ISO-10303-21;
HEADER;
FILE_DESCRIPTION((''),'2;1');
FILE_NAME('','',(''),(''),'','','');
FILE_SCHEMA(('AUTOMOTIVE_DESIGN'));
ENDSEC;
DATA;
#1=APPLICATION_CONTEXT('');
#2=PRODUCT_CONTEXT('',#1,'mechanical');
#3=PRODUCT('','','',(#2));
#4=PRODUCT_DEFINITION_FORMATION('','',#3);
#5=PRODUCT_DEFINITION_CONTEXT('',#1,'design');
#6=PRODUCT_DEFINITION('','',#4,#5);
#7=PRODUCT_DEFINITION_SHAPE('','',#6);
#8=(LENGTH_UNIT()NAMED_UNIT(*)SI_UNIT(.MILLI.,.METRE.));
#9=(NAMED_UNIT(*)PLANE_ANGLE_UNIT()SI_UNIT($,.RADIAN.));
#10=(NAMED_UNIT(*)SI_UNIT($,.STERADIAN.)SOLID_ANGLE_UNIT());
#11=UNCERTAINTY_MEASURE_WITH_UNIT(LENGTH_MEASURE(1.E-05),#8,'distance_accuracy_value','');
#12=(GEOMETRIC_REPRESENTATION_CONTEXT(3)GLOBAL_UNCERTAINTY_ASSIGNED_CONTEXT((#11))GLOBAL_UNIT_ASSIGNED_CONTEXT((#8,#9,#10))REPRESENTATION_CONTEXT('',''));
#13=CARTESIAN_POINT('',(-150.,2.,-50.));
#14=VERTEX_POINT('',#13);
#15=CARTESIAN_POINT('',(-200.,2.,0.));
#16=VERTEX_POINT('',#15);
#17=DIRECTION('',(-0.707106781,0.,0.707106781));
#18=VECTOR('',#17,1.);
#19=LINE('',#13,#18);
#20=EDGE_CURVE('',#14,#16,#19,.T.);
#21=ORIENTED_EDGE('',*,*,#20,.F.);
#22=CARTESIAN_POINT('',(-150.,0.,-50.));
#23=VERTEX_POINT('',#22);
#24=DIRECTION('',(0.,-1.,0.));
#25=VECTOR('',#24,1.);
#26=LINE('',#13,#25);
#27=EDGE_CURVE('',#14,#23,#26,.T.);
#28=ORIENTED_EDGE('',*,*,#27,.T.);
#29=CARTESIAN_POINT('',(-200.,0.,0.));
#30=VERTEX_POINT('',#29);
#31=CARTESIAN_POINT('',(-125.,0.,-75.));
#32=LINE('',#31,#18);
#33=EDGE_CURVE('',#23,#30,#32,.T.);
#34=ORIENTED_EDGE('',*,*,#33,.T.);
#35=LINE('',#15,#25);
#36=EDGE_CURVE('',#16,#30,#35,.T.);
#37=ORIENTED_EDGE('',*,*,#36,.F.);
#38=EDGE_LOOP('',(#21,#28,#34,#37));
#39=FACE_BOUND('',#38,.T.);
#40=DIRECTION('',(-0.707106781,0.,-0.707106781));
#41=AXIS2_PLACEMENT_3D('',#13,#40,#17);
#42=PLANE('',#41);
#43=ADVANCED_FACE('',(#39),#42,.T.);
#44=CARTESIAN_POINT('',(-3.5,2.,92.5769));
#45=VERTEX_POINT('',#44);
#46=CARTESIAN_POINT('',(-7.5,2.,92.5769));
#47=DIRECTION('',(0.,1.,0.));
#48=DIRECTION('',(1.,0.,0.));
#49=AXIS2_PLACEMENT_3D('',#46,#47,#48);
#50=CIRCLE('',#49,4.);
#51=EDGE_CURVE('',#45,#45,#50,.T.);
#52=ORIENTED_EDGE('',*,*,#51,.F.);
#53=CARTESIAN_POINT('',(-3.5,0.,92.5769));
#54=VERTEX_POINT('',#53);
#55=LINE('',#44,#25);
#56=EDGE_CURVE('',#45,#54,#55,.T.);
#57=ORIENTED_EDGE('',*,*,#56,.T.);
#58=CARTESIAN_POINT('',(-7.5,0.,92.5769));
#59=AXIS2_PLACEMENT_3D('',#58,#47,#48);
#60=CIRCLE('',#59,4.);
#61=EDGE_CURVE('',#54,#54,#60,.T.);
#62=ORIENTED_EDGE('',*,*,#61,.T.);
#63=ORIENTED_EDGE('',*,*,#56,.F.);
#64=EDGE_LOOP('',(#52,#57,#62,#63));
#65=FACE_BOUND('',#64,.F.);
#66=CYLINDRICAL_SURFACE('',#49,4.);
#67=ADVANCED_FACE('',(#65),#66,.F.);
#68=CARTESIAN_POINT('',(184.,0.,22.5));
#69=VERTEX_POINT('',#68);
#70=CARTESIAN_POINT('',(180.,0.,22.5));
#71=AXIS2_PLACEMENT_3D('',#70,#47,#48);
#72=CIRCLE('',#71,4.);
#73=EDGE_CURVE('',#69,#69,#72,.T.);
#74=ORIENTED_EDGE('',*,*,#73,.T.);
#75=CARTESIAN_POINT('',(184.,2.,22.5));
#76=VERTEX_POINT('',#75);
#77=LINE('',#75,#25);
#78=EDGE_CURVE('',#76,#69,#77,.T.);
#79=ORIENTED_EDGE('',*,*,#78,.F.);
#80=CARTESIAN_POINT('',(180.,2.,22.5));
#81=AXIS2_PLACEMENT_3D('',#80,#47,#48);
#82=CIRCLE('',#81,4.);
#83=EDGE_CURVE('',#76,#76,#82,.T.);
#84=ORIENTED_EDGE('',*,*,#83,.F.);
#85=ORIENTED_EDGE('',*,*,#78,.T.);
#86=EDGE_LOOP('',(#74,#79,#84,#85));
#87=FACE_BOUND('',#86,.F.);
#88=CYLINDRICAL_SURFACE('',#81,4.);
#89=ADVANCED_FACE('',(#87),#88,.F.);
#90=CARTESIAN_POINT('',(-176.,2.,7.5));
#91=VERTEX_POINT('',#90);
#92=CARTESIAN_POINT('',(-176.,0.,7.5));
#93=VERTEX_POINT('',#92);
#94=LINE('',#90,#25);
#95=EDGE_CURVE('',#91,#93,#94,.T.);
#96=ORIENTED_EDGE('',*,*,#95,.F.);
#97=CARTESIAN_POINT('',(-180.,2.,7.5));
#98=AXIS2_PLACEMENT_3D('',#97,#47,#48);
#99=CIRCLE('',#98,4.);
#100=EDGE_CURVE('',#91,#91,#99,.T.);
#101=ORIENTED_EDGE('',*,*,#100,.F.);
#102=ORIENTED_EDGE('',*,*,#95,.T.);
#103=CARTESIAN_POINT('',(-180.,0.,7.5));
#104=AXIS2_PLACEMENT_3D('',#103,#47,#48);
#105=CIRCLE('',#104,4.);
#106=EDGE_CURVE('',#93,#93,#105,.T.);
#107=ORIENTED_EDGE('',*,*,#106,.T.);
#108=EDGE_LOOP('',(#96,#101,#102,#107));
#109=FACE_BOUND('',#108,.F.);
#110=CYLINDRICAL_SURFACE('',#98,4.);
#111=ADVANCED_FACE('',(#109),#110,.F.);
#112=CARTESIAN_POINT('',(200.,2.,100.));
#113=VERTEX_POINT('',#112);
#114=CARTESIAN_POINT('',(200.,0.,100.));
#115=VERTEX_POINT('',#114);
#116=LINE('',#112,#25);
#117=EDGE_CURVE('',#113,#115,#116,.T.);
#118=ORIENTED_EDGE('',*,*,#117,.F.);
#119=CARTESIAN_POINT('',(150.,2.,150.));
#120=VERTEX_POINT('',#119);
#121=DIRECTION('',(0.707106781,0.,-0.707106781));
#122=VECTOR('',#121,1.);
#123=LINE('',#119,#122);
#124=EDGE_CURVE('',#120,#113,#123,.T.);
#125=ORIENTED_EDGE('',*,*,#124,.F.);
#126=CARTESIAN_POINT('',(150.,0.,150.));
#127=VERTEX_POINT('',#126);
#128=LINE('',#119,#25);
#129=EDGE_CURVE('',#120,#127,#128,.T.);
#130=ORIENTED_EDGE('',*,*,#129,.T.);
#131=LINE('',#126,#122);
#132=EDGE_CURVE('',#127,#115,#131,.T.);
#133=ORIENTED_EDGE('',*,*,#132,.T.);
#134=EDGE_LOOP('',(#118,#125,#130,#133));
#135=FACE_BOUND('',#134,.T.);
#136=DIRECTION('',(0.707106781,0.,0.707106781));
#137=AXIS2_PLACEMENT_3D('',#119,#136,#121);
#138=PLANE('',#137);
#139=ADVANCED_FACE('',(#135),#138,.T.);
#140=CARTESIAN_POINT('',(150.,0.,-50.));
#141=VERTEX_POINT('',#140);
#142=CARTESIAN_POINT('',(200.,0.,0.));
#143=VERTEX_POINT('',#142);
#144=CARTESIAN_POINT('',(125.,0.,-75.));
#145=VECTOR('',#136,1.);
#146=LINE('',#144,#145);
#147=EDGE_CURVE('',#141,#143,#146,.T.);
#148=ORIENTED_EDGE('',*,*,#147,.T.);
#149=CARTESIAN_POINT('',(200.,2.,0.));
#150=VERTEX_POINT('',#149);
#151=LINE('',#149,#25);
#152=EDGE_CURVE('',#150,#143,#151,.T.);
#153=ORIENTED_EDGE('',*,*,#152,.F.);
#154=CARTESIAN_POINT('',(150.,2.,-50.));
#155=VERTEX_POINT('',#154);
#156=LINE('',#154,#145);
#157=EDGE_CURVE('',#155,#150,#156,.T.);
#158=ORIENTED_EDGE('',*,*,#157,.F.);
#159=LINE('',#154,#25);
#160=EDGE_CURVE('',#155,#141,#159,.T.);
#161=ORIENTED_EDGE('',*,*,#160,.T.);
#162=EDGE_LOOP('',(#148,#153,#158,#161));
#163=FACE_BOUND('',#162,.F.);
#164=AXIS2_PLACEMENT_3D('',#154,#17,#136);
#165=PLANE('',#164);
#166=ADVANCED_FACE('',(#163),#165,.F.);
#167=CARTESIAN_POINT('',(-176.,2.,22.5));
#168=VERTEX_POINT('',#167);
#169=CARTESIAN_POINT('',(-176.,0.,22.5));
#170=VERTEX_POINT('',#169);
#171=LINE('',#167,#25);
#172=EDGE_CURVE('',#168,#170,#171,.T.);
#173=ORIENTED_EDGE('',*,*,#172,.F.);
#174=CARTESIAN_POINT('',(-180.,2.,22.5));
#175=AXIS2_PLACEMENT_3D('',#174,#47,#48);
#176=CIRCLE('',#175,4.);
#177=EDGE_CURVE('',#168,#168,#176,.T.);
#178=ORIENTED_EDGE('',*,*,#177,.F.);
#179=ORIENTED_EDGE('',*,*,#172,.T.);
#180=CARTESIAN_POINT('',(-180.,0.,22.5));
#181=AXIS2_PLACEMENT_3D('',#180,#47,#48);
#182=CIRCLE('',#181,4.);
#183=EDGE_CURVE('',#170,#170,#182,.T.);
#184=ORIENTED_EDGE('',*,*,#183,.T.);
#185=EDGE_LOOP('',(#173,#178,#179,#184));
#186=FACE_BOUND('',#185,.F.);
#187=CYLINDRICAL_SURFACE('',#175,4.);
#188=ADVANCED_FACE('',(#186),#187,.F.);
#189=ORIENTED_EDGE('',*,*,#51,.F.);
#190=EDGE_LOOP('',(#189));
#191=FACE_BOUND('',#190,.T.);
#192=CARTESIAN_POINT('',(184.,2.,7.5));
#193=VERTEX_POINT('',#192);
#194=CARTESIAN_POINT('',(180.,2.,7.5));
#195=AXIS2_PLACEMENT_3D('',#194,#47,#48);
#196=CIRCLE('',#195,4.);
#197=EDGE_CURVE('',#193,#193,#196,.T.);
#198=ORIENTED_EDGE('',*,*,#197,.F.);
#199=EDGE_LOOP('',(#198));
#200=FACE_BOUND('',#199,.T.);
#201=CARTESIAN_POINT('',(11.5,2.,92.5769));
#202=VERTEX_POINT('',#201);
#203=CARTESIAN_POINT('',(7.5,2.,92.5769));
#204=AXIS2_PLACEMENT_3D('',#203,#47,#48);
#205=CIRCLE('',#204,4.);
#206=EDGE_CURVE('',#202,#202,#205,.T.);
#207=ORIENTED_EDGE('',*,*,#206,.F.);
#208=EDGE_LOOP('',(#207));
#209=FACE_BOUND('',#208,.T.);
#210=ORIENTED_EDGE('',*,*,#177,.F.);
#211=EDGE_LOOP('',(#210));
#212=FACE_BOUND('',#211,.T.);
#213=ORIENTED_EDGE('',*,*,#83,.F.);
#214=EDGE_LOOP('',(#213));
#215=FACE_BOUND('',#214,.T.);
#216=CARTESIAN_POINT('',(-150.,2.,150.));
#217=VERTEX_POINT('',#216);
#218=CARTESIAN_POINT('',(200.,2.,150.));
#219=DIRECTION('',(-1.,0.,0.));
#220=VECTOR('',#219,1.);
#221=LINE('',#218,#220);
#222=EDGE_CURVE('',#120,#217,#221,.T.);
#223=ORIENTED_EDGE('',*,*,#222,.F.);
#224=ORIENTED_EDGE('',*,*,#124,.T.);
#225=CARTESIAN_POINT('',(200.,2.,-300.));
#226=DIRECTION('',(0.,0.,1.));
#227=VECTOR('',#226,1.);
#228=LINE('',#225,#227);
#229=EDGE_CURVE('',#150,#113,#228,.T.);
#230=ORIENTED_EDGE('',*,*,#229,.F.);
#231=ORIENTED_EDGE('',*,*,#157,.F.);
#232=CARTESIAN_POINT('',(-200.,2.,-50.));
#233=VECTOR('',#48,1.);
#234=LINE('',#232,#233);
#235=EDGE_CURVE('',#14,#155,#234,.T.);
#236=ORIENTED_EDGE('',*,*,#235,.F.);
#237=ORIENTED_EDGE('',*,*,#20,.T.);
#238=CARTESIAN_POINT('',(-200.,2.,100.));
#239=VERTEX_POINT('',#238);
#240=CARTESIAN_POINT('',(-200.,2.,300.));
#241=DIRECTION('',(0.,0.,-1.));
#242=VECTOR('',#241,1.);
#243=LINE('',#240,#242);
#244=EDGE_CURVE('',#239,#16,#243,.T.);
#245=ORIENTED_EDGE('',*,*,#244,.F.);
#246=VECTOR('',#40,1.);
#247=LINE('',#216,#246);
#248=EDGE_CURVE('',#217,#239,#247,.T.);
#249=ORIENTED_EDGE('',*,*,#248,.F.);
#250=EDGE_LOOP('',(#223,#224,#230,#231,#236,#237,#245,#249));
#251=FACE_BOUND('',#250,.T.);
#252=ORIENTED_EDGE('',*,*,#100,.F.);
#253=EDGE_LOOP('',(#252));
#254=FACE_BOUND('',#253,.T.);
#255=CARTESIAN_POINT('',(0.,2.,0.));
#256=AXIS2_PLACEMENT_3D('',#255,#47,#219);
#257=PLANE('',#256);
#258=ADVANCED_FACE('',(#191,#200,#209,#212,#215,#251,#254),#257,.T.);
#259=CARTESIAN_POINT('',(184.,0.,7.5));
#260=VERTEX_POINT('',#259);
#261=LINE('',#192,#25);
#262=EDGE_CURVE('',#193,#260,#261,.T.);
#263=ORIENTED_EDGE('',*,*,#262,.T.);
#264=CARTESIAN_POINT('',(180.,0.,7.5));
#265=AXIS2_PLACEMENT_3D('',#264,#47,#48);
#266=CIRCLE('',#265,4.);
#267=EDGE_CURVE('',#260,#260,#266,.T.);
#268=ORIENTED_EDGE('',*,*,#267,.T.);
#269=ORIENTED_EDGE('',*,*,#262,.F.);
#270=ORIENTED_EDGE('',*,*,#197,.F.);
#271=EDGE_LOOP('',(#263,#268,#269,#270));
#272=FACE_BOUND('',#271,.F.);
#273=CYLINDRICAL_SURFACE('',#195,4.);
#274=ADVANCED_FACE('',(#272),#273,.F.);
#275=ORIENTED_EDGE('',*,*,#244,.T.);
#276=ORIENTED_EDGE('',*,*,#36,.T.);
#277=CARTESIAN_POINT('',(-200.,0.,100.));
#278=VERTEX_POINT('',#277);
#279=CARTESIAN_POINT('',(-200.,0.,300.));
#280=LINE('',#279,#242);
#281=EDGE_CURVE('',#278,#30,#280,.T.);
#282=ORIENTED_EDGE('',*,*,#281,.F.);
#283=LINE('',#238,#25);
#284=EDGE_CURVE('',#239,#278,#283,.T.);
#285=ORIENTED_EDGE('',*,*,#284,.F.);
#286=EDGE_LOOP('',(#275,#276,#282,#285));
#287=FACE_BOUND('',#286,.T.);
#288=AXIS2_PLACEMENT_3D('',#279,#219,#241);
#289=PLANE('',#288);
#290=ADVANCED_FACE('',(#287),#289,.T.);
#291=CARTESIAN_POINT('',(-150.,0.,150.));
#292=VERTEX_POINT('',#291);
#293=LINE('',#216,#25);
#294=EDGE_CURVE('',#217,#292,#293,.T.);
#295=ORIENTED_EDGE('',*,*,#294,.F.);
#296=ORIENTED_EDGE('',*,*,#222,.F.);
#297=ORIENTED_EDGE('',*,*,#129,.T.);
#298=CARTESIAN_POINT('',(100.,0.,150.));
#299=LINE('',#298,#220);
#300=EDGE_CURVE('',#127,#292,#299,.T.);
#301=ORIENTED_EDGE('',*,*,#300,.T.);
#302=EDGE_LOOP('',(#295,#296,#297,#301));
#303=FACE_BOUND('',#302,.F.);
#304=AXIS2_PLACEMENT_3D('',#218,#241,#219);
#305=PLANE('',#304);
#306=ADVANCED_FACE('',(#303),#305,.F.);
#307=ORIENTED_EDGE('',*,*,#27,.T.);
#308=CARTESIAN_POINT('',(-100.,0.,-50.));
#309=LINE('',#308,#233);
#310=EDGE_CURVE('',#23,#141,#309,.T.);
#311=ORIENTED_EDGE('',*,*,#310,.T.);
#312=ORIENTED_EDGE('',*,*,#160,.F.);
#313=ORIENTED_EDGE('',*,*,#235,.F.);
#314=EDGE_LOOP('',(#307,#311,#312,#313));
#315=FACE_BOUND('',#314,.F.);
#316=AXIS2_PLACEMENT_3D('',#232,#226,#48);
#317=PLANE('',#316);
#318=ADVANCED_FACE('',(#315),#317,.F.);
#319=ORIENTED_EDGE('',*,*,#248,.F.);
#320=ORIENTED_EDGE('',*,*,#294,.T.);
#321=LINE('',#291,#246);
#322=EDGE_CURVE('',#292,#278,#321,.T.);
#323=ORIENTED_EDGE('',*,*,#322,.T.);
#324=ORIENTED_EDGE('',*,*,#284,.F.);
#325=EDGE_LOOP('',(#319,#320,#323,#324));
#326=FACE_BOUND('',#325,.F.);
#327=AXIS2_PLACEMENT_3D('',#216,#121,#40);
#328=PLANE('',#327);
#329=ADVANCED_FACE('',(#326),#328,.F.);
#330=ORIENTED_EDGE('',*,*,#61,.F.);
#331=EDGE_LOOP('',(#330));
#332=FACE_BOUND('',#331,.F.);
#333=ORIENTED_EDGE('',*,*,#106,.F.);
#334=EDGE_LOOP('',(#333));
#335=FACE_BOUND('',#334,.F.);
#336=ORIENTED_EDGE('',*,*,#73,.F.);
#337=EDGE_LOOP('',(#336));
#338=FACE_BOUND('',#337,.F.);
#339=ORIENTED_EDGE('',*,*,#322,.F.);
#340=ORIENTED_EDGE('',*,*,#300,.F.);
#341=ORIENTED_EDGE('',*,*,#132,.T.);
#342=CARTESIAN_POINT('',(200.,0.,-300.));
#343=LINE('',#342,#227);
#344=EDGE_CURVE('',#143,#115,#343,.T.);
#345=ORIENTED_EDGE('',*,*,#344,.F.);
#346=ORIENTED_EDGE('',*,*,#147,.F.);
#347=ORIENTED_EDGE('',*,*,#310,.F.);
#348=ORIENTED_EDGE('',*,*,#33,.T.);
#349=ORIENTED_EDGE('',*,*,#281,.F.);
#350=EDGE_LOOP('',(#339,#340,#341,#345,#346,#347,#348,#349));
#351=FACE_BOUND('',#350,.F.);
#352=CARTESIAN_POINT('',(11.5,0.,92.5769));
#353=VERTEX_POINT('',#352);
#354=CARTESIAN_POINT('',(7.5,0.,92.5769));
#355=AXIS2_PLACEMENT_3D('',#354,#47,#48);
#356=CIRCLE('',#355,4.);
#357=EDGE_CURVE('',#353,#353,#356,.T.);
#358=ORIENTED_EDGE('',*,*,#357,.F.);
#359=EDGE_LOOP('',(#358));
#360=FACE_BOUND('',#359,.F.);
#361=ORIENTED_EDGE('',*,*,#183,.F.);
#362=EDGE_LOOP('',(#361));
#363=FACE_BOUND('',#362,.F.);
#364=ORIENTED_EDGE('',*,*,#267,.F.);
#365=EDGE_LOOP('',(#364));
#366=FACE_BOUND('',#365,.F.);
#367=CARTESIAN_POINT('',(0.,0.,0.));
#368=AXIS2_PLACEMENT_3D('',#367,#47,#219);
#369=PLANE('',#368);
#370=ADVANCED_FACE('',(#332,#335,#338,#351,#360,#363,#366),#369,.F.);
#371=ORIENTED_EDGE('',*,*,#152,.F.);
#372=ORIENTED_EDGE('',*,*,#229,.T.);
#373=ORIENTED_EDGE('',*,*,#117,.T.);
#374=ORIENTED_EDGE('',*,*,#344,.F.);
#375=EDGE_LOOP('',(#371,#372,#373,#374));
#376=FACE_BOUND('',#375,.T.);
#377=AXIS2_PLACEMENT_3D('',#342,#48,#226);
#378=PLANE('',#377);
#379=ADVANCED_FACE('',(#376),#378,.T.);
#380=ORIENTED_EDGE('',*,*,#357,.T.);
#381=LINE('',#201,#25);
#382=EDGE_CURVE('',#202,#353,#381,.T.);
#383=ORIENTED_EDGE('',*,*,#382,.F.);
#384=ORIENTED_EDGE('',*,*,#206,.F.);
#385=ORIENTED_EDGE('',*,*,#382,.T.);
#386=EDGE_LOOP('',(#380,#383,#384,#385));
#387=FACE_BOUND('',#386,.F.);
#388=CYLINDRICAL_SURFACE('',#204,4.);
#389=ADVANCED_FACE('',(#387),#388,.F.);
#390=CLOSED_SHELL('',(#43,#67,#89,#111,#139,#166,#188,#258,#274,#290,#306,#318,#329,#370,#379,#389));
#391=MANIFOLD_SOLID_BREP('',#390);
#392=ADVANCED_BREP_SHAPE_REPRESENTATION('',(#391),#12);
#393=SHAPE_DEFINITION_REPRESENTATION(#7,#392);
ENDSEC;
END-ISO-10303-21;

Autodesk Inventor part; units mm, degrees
ref_plane "YZ Plane" through (0, 0, 0) normal (1, 0, 0) x (0, 1, 0)
ref_plane "XZ Plane" through (0, 0, 0) normal (0, 1, 0) x (-1, 0, 0)
sketch "Sketch1" plane through (0, 0, 0) normal (0, 1, 0) x (-1, 0, 0)
  line L0 (-200, 300) -> (200, 300)
  line L1 (200, 300) -> (200, -300)
  line L2 (200, -300) -> (-200, -300)
  line L3 (-200, -300) -> (-200, 300)
  line L4 (-200, 300) -> (200, -300) construction
  line L5 (200, 300) -> (-200, -300) construction
  point P0 (0, 0)
  dimension "d0" = 400
  dimension "d1" = 600
extrude "Extrusion1" add sketch "Sketch1" along normal blind 2
sketch "Sketch2" plane through (0, 2, 0) normal (0, 1, 0) x (1, 0, 0)
  line L0 (200, 300) -> (-200, 300) projected
  line L1 (-200, 300) -> (-200, 275)
  line L2 (-200, 300) -> (-200, -300) projected
  line L3 (-200, 300) -> (-100, 300)
  line L4 (-100, 300) -> (-200, 275)
  line L5 (-200, 275) -> (-200, 250)
  line L6 (-200, 250) -> (-175, 250)
  line L7 (-175, 250) -> (-175, 150)
  line L8 (-175, 150) -> (-200, 150)
  line L9 (-200, 250) -> (-200, 150)
  line L10 (0, 250) -> (0, 74.4907)
  line L11 (-155.9773, 0) -> (157.8952, 0)
  line L12 (-200, 300) -> (200, 300)
  line L13 (200, 300) -> (200, -300)
  line L14 (100, 300) -> (200, 275)
  line L15 (200, 250) -> (175, 250)
  line L16 (175, 250) -> (175, 150)
  line L17 (175, 150) -> (200, 150)
  line L18 (200, -300) -> (-200, -300)
  line L19 (-200, -300) -> (-200, -275)
  line L20 (-200, -300) -> (-100, -300)
  line L21 (-100, -300) -> (-200, -275)
  line L22 (-200, -275) -> (-200, -250)
  line L23 (-200, -250) -> (-200, -150)
  line L24 (200, -300) -> (200, 300)
  line L25 (100, -300) -> (200, -275)
  line L26 (-200, -300) -> (200, -300)
  point P0 (0, 0)
  dimension "d4" = 25
  dimension "d5" = 100
  dimension "d6" = 25
  dimension "d7" = 25
  dimension "d8" = 100
extrude "Extrusion2" cut sketch "Sketch2" against normal blind 2 contours L13 L14 L0 | L4 L1 L0 | L13 L17 L16 L15 | L6 L7 L8 L2 | L13 L18 L25 | L18 L2 L21
mirror "Mirror2" about plane through (0, 0, 0) normal (1, 0, 0)
ref_plane "Work Plane2" through (-100, 0, 190) normal (0, 0, 1) x (1, 0, 0)
mirror "Mirror4" about plane through (-100, 0, 190) normal (0, 0, 1) of "Mirror2"
sketch "Sketch13" plane through (0, 2, 0) normal (0, 1, 0) x (1, 0, 0)
  line L0 (-200, 150) -> (-200, -275) projected
  line L1 (-200, 0) -> (-200, 150)
  line L2 (-200, 150) -> (200, 150)
  line L3 (200, 150) -> (200, -150)
  line L4 (200, -150) -> (-200, -150)
  line L5 (-200, 0) -> (-200, 50)
  line L6 (-200, 50) -> (200, 50)
  line L7 (-200, 50) -> (-200, 595.1707)
  line L8 (-200, 595.1707) -> (291.7949, 595.1707)
  line L9 (291.7949, 595.1707) -> (291.7949, 150)
  line L10 (291.7949, 150) -> (200, 150)
  line L11 (-200, -150) -> (-200, -431.5542)
  line L12 (-200, -431.5542) -> (200, -431.5542)
  line L13 (200, -431.5542) -> (200, -150)
  point P0 (0, 0)
  dimension "d71" = 400
  dimension "d72" = 300
  dimension "d73" = 50
extrude "Extrusion11" cut sketch "Sketch13" against normal blind 10 contours L2 L3 L6 L0 | L7 L8 L9 L10 L2 | L4 L13 L12 L11 L0
sketch "Sketch14" plane through (0, 2, 0) normal (0, 1, 0) x (1, 0, 0)
  line L0 (-250, 100) -> (-150, 100)
  line L1 (-150, 100) -> (-150, 0)
  line L2 (-150, 0) -> (-250, 0)
  line L3 (-250, 0) -> (-250, 100)
  line L4 (-200, 50) -> (-200, -150) projected
  line L5 (-250, 100) -> (-150, 0) construction
  line L6 (-150, 100) -> (-250, 0) construction
  line L7 (200, 50) -> (-200, 50) projected
  line L8 (-150, 50) -> (-200, 0)
  line L9 (-200, 50) -> (-200, -50)
  line L10 (-200, -50) -> (200, -50)
  line L11 (0, 0) -> (0, -87.9853)
  line L12 (-250, -200) -> (-150, -200)
  line L13 (-150, -200) -> (-150, -100)
  line L14 (-150, -100) -> (-250, -100)
  line L15 (-250, -100) -> (-250, -200)
  line L16 (-150, -150) -> (-200, -100)
  line L17 (250, 100) -> (150, 100)
  line L18 (150, 100) -> (150, 0)
  line L19 (150, 0) -> (250, 0)
  line L20 (250, 0) -> (250, 100)
  line L21 (150, 50) -> (200, 0)
  line L22 (250, -200) -> (150, -200)
  line L23 (250, -100) -> (250, -200)
  line L24 (150, -100) -> (250, -100)
  line L25 (150, -150) -> (200, -100)
  line L26 (150, -200) -> (150, -100)
  dimension "d76" = 100
  dimension "d77" = 100
  dimension "d78" = 100
extrude "Extrusion12" cut sketch "Sketch14" against normal blind 10 contours L0 L1 L7 L4 L2 L3 | L8 L4 L7 | L15 L14 L16 L13 L12 | L20 L19 L21 L18 L17 | L22 L26 L25 L24 L23
sketch "Sketch15" plane through (0, 2, 0) normal (0, 1, 0) x (1, 0, 0)
  line L0 (-200, 0) -> (-200, -100) projected
  line L1 (-200, 0) -> (-200, -30)
  line L2 (-200, -30) -> (-170, -30)
  line L3 (-170, -30) -> (-170, 0)
  line L4 (-180, -15) -> (-180, -16)
  line L5 (-180, -16) -> (-180, -15)
  line L6 (-180, -15) -> (-180, -14)
  circle A0 centre (-180, -7.5) radius 4
  circle A1 centre (-180, -22.5) radius 4
  line L7 (0, 0) -> (0, -46.3113)
  circle A2 centre (180, -7.5) radius 4
  circle A3 centre (180, -22.5) radius 4
  dimension "d81" = 30
  dimension "d82" = 30
  dimension "d86" = 1
  dimension "d89" = 8
  dimension "d99" = 15
extrude "Extrusion13" cut sketch "Sketch15" against normal blind 10
sketch "Sketch16" plane through (0, 2, 0) normal (0, 1, 0) x (1, 0, 0)
  circle A0 centre (-80, -99.9978) radius 4 projected
  circle A1 centre (70, -99.9978) radius 4 projected
  circle A2 centre (7.5, -92.5769) radius 4
  circle A3 centre (-7.5, -92.5769) radius 4
  line L0 (0, -99.9978) -> (0, -89.9978)
  line L1 (0, -99.9978) -> (0, -91.9978)
  point P0 (0, 0)
  dimension "d95" = 8
  dimension "d96" = 8
  dimension "d106" = 8
extrude "Extrusion14" cut sketch "Sketch16" against normal blind 10 contours A2 | A3
ref_plane "Work Plane1" through (0, 0, 0) normal (1, 0, 0) x (0, 1, 0)
ref_plane "Work Plane3" through (0, 0, 380) normal (-1, 0, 0) x (0, 1, 0)
ref_plane "Work Plane4" through (0, 0, 380) normal (-1, 0, 0) x (0, 1, 0)
properties part number "chassis up" material "Steel, Mild"
